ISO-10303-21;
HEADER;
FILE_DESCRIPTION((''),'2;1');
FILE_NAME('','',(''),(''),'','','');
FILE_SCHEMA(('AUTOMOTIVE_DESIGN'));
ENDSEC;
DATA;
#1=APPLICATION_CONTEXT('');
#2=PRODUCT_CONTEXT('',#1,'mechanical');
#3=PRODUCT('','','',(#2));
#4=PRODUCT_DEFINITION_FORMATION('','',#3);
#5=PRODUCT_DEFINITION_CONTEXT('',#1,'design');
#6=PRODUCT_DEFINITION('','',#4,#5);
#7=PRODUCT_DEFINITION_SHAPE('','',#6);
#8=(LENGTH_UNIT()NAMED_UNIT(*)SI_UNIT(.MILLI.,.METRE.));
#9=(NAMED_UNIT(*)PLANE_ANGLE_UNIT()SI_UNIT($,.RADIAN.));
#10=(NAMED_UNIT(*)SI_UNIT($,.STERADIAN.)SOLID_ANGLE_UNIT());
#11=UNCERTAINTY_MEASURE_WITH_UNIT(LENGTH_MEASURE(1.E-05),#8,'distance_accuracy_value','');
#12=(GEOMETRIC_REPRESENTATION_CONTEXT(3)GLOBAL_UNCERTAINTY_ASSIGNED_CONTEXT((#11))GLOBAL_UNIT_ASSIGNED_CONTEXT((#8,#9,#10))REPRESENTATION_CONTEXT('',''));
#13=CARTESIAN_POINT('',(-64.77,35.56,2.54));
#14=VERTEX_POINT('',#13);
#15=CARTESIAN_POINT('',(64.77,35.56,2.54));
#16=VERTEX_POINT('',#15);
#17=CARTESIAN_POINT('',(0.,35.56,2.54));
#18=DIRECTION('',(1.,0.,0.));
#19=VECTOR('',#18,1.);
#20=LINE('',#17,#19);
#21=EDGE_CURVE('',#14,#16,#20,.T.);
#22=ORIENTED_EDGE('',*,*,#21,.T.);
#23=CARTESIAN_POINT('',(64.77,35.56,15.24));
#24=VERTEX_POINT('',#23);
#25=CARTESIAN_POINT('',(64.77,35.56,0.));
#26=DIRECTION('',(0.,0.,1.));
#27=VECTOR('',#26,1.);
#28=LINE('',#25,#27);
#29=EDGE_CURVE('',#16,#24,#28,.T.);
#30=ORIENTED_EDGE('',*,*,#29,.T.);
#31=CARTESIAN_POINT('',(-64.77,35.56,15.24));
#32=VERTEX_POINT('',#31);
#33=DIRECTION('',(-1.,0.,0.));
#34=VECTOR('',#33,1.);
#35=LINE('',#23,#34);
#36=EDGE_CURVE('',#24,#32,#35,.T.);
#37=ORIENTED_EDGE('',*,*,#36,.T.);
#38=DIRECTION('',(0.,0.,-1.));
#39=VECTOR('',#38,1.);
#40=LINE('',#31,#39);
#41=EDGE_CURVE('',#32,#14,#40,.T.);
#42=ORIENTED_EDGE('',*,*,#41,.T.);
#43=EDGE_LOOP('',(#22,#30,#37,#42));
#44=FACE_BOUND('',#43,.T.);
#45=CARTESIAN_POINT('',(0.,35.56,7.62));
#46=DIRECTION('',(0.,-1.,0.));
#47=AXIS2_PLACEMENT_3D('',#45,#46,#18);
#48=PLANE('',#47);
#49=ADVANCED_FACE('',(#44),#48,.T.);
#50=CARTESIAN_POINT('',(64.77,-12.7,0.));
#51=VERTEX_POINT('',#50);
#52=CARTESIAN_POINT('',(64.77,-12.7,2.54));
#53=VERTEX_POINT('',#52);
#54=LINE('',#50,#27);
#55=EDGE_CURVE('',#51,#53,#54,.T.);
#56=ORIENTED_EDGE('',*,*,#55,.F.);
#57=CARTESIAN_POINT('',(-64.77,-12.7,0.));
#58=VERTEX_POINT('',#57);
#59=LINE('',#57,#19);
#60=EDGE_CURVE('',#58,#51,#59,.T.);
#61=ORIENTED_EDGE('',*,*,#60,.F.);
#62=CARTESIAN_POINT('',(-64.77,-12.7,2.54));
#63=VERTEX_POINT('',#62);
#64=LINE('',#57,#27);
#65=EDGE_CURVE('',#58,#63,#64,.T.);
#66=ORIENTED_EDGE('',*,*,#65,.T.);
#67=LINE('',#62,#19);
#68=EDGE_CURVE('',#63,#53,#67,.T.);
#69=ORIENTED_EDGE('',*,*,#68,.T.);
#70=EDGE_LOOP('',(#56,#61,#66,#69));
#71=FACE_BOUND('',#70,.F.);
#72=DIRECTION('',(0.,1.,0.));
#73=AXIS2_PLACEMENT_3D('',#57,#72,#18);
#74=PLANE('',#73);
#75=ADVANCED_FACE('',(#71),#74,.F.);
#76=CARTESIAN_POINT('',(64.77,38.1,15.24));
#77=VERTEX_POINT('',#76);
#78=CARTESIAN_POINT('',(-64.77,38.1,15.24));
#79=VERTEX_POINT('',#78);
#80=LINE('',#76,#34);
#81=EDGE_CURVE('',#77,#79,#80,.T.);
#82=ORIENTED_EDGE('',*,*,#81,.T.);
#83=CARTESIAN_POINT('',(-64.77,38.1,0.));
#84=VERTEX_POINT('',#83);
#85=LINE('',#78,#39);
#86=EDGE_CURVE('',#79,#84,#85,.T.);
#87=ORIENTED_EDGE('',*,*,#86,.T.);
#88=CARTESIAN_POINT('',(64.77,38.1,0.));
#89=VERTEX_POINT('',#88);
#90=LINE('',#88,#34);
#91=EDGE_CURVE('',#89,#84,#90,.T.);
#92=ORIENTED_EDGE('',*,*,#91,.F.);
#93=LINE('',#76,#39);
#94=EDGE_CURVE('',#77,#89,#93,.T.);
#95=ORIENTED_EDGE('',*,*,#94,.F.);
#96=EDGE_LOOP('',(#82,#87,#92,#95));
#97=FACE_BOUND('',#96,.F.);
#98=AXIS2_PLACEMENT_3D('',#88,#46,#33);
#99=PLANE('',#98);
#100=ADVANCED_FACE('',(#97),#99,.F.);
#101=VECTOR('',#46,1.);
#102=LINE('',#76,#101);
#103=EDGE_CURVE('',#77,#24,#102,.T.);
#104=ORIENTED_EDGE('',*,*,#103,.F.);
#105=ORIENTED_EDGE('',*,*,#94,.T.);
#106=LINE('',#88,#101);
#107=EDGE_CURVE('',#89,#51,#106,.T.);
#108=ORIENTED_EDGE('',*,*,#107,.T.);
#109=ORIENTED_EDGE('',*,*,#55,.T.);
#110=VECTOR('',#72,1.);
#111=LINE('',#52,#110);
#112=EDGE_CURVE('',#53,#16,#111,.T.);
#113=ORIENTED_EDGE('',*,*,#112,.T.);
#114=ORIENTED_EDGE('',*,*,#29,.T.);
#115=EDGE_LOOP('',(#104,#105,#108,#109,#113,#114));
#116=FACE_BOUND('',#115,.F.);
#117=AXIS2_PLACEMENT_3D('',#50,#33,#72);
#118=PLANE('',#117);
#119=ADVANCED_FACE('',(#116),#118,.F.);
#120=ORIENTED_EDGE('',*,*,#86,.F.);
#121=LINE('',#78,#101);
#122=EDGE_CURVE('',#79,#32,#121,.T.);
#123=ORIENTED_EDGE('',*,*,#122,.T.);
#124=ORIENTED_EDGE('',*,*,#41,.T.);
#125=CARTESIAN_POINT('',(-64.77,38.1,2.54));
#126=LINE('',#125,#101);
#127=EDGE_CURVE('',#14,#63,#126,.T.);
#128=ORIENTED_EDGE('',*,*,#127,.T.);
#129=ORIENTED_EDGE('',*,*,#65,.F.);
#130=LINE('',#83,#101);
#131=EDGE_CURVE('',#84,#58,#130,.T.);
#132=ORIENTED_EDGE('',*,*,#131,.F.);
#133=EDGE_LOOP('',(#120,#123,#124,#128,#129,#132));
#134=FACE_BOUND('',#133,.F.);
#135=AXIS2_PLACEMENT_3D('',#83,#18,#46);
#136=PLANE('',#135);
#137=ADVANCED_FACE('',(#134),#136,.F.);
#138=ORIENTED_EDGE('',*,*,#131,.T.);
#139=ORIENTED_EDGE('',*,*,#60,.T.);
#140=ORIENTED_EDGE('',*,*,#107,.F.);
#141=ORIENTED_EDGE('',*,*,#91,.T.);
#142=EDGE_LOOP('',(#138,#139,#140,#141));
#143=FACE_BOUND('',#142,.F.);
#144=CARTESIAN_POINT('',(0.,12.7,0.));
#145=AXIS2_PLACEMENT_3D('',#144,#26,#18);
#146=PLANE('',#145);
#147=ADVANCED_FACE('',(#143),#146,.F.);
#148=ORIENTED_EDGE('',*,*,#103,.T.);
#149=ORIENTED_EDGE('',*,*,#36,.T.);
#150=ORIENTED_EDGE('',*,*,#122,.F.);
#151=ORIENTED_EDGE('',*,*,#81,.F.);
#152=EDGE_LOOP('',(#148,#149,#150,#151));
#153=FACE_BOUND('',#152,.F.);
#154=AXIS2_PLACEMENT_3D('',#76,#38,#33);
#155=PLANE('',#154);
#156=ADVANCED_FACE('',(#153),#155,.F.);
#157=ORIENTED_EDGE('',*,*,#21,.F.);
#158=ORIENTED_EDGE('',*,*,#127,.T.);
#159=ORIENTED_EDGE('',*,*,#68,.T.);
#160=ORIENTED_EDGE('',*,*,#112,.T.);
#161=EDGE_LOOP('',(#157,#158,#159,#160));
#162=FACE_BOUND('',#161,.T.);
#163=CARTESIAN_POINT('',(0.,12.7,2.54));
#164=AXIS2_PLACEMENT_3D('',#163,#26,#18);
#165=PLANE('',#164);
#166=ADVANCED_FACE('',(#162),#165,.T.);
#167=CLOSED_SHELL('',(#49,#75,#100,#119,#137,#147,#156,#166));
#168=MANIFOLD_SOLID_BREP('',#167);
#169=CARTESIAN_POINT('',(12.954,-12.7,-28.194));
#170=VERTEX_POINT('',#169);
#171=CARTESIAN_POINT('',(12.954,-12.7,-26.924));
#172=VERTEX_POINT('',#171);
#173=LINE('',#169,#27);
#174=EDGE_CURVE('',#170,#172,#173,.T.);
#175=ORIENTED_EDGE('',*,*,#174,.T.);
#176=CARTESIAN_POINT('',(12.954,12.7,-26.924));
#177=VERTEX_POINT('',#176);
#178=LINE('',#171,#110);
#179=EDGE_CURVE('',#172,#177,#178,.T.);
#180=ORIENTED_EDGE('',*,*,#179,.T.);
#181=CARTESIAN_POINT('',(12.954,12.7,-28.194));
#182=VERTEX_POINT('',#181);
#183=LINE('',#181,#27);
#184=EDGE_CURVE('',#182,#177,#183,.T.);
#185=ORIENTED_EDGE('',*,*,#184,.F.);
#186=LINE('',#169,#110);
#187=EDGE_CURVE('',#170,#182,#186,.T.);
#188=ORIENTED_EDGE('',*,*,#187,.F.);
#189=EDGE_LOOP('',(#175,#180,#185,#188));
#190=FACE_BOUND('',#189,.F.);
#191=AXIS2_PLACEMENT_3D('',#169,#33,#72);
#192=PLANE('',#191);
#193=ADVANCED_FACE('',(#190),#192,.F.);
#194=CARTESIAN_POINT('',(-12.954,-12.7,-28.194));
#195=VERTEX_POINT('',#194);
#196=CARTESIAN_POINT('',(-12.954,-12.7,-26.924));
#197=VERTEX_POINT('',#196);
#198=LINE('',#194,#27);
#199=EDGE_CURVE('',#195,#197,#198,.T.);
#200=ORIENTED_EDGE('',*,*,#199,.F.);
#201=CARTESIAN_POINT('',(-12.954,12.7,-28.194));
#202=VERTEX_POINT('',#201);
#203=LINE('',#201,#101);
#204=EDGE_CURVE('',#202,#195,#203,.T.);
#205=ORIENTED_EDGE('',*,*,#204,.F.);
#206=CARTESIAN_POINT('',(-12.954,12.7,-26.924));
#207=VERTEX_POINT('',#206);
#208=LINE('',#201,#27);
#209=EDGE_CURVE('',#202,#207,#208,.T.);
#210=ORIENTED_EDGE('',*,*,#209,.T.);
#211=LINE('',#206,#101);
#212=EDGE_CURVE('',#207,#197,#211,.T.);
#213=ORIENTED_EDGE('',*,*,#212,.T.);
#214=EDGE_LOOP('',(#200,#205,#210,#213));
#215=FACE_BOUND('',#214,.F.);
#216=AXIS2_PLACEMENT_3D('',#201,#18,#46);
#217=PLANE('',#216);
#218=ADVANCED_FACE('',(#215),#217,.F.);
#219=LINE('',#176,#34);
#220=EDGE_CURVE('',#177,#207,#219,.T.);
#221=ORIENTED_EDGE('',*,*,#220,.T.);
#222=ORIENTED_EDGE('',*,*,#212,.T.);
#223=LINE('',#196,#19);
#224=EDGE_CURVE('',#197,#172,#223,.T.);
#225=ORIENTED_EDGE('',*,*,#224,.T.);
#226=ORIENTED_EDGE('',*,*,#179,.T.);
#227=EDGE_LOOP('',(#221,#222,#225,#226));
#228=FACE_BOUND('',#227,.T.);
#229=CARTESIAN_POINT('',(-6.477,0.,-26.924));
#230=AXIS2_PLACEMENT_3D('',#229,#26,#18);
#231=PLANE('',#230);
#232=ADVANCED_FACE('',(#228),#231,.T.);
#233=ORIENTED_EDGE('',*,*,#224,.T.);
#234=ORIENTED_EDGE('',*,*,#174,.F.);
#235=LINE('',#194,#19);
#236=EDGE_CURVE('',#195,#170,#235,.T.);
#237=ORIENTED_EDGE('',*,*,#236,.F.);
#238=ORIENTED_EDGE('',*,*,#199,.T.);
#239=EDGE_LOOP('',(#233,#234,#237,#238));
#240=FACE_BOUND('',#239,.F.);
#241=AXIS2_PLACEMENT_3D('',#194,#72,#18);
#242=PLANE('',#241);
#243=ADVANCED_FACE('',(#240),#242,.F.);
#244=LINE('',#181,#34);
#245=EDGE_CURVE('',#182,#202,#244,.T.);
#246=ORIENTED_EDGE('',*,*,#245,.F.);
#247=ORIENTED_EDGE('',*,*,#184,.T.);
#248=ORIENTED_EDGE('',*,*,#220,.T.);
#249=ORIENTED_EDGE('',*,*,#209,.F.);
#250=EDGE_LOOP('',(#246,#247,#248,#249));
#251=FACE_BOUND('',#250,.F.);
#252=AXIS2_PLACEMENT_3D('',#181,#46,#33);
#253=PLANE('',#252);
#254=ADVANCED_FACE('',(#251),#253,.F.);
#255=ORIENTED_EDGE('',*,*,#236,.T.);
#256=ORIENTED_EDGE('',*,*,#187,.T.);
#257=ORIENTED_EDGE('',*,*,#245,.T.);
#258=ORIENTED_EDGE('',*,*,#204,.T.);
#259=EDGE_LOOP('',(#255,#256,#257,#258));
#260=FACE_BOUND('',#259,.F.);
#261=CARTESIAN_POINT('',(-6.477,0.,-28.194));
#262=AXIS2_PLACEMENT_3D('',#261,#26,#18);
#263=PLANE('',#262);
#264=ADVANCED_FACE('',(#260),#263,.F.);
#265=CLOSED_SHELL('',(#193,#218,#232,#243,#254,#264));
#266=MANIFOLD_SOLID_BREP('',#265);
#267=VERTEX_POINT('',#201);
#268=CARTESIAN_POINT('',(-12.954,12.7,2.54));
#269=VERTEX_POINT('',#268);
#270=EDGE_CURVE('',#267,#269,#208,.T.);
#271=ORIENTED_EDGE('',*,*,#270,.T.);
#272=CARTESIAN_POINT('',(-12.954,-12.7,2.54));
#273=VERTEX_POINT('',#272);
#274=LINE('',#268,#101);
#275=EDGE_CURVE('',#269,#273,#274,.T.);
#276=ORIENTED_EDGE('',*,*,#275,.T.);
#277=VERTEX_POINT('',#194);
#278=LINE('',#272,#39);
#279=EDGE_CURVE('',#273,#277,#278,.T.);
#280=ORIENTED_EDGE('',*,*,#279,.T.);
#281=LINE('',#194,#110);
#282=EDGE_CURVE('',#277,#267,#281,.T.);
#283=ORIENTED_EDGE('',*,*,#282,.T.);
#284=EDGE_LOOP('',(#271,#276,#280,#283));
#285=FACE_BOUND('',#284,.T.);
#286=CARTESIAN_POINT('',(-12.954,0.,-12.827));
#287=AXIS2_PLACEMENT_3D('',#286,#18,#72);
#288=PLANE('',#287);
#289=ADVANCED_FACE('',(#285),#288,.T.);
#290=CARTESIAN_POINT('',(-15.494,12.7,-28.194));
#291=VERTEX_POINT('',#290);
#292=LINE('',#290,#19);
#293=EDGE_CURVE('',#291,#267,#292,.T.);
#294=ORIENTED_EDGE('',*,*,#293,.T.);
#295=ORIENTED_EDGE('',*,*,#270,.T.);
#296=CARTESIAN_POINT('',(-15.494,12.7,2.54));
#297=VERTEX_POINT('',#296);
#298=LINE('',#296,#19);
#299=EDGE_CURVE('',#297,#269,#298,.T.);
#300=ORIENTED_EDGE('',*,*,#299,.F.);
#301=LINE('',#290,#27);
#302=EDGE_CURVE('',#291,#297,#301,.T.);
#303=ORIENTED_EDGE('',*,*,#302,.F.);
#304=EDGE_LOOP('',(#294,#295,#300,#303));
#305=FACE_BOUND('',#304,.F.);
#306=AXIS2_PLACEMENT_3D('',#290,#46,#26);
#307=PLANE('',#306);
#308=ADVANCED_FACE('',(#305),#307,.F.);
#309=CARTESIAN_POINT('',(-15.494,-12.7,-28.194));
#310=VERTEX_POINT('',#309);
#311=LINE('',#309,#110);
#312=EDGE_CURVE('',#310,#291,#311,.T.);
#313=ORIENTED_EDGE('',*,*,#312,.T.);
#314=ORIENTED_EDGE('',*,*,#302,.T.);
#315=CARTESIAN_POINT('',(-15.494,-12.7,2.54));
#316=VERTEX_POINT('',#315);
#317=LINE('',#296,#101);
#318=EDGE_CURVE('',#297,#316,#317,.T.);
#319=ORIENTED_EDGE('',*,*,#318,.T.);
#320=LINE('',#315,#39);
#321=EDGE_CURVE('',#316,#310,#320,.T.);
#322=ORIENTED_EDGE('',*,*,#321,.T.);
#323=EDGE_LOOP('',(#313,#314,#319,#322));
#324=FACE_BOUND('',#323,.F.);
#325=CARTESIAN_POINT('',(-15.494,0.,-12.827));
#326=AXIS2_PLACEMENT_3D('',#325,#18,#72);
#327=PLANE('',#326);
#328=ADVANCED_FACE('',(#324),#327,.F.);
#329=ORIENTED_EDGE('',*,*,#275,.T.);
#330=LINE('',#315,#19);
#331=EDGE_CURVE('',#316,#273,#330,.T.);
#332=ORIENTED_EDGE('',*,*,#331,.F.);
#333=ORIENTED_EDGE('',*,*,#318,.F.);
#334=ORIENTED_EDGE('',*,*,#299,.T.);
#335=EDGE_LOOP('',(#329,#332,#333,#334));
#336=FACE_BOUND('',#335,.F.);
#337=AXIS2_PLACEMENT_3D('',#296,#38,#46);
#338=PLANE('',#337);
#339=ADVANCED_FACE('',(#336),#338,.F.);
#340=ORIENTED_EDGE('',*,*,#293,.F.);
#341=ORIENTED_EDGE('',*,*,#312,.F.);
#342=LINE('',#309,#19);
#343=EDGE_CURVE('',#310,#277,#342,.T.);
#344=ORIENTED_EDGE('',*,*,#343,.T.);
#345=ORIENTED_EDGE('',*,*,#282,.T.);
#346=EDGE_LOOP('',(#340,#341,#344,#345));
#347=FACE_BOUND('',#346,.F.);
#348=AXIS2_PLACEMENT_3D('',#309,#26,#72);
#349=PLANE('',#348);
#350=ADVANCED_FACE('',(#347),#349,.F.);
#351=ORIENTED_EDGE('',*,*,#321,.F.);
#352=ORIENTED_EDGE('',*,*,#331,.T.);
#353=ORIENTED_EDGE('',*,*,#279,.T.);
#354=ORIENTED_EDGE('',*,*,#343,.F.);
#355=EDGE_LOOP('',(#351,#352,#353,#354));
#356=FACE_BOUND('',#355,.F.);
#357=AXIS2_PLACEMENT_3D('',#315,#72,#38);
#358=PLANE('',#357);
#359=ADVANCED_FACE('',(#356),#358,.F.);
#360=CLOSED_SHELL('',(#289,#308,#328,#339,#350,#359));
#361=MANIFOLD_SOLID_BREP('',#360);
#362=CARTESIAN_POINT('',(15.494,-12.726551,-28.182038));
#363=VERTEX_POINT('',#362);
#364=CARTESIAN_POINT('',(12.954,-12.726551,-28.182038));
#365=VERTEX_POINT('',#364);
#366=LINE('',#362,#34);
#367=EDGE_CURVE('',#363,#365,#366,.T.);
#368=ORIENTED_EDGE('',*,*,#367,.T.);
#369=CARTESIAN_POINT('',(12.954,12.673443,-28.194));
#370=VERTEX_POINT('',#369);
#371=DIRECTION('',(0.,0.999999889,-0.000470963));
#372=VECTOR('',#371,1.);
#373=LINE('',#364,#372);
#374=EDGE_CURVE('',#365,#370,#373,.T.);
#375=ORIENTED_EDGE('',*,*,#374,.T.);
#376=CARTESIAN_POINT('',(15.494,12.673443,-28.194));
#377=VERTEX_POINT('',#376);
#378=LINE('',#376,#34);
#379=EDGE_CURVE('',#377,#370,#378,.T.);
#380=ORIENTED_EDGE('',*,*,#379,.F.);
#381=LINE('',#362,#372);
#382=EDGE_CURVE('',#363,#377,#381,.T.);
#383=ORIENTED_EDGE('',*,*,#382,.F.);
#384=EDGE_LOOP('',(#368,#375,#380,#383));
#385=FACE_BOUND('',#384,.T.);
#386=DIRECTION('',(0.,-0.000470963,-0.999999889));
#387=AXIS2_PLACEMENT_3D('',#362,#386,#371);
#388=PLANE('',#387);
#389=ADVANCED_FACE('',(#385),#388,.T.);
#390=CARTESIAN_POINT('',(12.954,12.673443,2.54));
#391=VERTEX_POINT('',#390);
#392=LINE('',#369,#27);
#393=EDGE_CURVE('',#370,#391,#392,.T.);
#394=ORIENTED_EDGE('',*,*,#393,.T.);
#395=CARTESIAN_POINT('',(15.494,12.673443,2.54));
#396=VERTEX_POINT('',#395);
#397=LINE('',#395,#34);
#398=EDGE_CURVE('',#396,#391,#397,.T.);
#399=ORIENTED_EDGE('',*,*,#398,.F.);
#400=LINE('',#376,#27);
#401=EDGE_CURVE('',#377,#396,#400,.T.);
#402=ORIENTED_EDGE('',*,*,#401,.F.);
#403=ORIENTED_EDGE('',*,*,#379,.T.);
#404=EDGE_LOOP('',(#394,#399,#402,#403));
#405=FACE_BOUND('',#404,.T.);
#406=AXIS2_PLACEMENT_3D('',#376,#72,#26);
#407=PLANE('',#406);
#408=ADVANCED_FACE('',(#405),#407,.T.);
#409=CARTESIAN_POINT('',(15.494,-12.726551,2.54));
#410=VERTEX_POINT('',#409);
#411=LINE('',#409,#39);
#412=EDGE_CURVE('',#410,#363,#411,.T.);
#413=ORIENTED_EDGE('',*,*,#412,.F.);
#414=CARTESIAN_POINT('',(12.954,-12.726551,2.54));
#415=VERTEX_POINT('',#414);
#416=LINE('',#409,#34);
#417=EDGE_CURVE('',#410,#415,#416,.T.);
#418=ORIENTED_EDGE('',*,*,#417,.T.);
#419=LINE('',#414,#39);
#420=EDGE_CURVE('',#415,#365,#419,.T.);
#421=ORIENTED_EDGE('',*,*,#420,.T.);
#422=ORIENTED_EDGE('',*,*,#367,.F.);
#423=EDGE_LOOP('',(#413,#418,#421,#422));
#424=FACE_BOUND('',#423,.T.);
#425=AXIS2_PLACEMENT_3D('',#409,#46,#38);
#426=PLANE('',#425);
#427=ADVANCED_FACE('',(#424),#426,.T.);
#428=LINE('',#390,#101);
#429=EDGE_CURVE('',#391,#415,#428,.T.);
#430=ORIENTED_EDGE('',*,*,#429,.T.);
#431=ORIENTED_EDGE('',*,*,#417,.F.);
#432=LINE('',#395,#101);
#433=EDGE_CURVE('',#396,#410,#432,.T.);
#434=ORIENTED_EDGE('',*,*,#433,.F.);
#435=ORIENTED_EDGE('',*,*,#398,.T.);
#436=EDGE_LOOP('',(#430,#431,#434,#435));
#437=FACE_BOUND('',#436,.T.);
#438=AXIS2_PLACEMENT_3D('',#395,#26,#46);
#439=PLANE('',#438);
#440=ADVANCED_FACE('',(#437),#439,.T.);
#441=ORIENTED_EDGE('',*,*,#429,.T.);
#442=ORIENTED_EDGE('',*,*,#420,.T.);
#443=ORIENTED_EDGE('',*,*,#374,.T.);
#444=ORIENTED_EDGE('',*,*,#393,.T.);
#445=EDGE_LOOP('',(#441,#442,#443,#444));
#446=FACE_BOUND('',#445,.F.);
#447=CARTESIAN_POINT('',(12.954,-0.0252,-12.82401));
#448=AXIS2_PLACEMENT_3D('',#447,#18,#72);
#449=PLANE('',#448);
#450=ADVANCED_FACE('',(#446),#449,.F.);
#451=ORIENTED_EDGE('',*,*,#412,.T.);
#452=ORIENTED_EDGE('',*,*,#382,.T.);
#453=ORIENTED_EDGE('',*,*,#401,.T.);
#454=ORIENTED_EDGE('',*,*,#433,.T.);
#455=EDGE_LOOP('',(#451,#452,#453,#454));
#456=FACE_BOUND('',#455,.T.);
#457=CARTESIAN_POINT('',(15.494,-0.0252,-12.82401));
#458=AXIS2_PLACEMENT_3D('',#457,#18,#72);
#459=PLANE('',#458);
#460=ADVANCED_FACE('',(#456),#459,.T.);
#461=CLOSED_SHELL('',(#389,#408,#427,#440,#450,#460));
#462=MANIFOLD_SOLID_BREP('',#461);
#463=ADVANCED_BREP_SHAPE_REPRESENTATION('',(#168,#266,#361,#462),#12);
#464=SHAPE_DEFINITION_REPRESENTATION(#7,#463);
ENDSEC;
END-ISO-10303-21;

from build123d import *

# Parameters (mm, degrees)
F8_DEPTH  = 1.27
F9_DEPTH  = 2.54
F10_DEPTH = 2.54
F11_DEPTH = 2.54
F13_DEPTH = 2.54


# Not quite as in the source:
# - a feature names something its author has since deleted; it is built from what else it names


with BuildPart() as f8:
    # F3 (on offset) → F8 (new body)
    with BuildSketch(Plane.XY.offset(-28.194)):
        Polygon((0, -12.7), (0, 0), (0, 12.7), (-12.954, 12.7), (-12.954, -12.7), align=None)
        Polygon((0, 12.7), (0, 0), (0, -12.7), (12.954, -12.7), (12.954, 12.7), align=None)
    extrude(amount=F8_DEPTH)


with BuildPart() as f9:
    # F7 (on offset) → F9 (new body)
    with BuildSketch(Plane.YZ.offset(-15.494)):
        Polygon((12.7, 2.54), (0, 2.54), (-12.7, 2.54), (-12.7, -28.194), (12.7, -28.194), align=None)
    extrude(amount=F9_DEPTH)


with BuildPart() as f10:
    # F5 (on offset) → F10 (new body)
    with BuildSketch(Plane.YZ.offset(15.494)):
        Polygon((12.6734433368, 2.54), (-12.7265510293, 2.54), (-12.7265510293, -28.1820375444), (12.6734433368, -28.194), align=None)
    extrude(amount=-F10_DEPTH)


with BuildPart() as f11:
    # F0 (on Top) → F11 (new body)
    with BuildSketch(Plane.XY):
        Polygon((-64.77, 38.1), (-64.77, 0), (-64.77, -12.7), (64.77, -12.7), (64.77, 38.1), align=None)
    extrude(amount=F11_DEPTH)

    # F12 (on offset) → F13 (join)
    with BuildSketch(Plane.XZ.offset(-38.1)):
        Polygon((-64.77, 0), (0, 0), (64.77, 0), (64.77, 15.24), (-64.77, 15.24), align=None)
    extrude(amount=F13_DEPTH)


solid = Compound([f8.part, f9.part, f10.part, f11.part])
